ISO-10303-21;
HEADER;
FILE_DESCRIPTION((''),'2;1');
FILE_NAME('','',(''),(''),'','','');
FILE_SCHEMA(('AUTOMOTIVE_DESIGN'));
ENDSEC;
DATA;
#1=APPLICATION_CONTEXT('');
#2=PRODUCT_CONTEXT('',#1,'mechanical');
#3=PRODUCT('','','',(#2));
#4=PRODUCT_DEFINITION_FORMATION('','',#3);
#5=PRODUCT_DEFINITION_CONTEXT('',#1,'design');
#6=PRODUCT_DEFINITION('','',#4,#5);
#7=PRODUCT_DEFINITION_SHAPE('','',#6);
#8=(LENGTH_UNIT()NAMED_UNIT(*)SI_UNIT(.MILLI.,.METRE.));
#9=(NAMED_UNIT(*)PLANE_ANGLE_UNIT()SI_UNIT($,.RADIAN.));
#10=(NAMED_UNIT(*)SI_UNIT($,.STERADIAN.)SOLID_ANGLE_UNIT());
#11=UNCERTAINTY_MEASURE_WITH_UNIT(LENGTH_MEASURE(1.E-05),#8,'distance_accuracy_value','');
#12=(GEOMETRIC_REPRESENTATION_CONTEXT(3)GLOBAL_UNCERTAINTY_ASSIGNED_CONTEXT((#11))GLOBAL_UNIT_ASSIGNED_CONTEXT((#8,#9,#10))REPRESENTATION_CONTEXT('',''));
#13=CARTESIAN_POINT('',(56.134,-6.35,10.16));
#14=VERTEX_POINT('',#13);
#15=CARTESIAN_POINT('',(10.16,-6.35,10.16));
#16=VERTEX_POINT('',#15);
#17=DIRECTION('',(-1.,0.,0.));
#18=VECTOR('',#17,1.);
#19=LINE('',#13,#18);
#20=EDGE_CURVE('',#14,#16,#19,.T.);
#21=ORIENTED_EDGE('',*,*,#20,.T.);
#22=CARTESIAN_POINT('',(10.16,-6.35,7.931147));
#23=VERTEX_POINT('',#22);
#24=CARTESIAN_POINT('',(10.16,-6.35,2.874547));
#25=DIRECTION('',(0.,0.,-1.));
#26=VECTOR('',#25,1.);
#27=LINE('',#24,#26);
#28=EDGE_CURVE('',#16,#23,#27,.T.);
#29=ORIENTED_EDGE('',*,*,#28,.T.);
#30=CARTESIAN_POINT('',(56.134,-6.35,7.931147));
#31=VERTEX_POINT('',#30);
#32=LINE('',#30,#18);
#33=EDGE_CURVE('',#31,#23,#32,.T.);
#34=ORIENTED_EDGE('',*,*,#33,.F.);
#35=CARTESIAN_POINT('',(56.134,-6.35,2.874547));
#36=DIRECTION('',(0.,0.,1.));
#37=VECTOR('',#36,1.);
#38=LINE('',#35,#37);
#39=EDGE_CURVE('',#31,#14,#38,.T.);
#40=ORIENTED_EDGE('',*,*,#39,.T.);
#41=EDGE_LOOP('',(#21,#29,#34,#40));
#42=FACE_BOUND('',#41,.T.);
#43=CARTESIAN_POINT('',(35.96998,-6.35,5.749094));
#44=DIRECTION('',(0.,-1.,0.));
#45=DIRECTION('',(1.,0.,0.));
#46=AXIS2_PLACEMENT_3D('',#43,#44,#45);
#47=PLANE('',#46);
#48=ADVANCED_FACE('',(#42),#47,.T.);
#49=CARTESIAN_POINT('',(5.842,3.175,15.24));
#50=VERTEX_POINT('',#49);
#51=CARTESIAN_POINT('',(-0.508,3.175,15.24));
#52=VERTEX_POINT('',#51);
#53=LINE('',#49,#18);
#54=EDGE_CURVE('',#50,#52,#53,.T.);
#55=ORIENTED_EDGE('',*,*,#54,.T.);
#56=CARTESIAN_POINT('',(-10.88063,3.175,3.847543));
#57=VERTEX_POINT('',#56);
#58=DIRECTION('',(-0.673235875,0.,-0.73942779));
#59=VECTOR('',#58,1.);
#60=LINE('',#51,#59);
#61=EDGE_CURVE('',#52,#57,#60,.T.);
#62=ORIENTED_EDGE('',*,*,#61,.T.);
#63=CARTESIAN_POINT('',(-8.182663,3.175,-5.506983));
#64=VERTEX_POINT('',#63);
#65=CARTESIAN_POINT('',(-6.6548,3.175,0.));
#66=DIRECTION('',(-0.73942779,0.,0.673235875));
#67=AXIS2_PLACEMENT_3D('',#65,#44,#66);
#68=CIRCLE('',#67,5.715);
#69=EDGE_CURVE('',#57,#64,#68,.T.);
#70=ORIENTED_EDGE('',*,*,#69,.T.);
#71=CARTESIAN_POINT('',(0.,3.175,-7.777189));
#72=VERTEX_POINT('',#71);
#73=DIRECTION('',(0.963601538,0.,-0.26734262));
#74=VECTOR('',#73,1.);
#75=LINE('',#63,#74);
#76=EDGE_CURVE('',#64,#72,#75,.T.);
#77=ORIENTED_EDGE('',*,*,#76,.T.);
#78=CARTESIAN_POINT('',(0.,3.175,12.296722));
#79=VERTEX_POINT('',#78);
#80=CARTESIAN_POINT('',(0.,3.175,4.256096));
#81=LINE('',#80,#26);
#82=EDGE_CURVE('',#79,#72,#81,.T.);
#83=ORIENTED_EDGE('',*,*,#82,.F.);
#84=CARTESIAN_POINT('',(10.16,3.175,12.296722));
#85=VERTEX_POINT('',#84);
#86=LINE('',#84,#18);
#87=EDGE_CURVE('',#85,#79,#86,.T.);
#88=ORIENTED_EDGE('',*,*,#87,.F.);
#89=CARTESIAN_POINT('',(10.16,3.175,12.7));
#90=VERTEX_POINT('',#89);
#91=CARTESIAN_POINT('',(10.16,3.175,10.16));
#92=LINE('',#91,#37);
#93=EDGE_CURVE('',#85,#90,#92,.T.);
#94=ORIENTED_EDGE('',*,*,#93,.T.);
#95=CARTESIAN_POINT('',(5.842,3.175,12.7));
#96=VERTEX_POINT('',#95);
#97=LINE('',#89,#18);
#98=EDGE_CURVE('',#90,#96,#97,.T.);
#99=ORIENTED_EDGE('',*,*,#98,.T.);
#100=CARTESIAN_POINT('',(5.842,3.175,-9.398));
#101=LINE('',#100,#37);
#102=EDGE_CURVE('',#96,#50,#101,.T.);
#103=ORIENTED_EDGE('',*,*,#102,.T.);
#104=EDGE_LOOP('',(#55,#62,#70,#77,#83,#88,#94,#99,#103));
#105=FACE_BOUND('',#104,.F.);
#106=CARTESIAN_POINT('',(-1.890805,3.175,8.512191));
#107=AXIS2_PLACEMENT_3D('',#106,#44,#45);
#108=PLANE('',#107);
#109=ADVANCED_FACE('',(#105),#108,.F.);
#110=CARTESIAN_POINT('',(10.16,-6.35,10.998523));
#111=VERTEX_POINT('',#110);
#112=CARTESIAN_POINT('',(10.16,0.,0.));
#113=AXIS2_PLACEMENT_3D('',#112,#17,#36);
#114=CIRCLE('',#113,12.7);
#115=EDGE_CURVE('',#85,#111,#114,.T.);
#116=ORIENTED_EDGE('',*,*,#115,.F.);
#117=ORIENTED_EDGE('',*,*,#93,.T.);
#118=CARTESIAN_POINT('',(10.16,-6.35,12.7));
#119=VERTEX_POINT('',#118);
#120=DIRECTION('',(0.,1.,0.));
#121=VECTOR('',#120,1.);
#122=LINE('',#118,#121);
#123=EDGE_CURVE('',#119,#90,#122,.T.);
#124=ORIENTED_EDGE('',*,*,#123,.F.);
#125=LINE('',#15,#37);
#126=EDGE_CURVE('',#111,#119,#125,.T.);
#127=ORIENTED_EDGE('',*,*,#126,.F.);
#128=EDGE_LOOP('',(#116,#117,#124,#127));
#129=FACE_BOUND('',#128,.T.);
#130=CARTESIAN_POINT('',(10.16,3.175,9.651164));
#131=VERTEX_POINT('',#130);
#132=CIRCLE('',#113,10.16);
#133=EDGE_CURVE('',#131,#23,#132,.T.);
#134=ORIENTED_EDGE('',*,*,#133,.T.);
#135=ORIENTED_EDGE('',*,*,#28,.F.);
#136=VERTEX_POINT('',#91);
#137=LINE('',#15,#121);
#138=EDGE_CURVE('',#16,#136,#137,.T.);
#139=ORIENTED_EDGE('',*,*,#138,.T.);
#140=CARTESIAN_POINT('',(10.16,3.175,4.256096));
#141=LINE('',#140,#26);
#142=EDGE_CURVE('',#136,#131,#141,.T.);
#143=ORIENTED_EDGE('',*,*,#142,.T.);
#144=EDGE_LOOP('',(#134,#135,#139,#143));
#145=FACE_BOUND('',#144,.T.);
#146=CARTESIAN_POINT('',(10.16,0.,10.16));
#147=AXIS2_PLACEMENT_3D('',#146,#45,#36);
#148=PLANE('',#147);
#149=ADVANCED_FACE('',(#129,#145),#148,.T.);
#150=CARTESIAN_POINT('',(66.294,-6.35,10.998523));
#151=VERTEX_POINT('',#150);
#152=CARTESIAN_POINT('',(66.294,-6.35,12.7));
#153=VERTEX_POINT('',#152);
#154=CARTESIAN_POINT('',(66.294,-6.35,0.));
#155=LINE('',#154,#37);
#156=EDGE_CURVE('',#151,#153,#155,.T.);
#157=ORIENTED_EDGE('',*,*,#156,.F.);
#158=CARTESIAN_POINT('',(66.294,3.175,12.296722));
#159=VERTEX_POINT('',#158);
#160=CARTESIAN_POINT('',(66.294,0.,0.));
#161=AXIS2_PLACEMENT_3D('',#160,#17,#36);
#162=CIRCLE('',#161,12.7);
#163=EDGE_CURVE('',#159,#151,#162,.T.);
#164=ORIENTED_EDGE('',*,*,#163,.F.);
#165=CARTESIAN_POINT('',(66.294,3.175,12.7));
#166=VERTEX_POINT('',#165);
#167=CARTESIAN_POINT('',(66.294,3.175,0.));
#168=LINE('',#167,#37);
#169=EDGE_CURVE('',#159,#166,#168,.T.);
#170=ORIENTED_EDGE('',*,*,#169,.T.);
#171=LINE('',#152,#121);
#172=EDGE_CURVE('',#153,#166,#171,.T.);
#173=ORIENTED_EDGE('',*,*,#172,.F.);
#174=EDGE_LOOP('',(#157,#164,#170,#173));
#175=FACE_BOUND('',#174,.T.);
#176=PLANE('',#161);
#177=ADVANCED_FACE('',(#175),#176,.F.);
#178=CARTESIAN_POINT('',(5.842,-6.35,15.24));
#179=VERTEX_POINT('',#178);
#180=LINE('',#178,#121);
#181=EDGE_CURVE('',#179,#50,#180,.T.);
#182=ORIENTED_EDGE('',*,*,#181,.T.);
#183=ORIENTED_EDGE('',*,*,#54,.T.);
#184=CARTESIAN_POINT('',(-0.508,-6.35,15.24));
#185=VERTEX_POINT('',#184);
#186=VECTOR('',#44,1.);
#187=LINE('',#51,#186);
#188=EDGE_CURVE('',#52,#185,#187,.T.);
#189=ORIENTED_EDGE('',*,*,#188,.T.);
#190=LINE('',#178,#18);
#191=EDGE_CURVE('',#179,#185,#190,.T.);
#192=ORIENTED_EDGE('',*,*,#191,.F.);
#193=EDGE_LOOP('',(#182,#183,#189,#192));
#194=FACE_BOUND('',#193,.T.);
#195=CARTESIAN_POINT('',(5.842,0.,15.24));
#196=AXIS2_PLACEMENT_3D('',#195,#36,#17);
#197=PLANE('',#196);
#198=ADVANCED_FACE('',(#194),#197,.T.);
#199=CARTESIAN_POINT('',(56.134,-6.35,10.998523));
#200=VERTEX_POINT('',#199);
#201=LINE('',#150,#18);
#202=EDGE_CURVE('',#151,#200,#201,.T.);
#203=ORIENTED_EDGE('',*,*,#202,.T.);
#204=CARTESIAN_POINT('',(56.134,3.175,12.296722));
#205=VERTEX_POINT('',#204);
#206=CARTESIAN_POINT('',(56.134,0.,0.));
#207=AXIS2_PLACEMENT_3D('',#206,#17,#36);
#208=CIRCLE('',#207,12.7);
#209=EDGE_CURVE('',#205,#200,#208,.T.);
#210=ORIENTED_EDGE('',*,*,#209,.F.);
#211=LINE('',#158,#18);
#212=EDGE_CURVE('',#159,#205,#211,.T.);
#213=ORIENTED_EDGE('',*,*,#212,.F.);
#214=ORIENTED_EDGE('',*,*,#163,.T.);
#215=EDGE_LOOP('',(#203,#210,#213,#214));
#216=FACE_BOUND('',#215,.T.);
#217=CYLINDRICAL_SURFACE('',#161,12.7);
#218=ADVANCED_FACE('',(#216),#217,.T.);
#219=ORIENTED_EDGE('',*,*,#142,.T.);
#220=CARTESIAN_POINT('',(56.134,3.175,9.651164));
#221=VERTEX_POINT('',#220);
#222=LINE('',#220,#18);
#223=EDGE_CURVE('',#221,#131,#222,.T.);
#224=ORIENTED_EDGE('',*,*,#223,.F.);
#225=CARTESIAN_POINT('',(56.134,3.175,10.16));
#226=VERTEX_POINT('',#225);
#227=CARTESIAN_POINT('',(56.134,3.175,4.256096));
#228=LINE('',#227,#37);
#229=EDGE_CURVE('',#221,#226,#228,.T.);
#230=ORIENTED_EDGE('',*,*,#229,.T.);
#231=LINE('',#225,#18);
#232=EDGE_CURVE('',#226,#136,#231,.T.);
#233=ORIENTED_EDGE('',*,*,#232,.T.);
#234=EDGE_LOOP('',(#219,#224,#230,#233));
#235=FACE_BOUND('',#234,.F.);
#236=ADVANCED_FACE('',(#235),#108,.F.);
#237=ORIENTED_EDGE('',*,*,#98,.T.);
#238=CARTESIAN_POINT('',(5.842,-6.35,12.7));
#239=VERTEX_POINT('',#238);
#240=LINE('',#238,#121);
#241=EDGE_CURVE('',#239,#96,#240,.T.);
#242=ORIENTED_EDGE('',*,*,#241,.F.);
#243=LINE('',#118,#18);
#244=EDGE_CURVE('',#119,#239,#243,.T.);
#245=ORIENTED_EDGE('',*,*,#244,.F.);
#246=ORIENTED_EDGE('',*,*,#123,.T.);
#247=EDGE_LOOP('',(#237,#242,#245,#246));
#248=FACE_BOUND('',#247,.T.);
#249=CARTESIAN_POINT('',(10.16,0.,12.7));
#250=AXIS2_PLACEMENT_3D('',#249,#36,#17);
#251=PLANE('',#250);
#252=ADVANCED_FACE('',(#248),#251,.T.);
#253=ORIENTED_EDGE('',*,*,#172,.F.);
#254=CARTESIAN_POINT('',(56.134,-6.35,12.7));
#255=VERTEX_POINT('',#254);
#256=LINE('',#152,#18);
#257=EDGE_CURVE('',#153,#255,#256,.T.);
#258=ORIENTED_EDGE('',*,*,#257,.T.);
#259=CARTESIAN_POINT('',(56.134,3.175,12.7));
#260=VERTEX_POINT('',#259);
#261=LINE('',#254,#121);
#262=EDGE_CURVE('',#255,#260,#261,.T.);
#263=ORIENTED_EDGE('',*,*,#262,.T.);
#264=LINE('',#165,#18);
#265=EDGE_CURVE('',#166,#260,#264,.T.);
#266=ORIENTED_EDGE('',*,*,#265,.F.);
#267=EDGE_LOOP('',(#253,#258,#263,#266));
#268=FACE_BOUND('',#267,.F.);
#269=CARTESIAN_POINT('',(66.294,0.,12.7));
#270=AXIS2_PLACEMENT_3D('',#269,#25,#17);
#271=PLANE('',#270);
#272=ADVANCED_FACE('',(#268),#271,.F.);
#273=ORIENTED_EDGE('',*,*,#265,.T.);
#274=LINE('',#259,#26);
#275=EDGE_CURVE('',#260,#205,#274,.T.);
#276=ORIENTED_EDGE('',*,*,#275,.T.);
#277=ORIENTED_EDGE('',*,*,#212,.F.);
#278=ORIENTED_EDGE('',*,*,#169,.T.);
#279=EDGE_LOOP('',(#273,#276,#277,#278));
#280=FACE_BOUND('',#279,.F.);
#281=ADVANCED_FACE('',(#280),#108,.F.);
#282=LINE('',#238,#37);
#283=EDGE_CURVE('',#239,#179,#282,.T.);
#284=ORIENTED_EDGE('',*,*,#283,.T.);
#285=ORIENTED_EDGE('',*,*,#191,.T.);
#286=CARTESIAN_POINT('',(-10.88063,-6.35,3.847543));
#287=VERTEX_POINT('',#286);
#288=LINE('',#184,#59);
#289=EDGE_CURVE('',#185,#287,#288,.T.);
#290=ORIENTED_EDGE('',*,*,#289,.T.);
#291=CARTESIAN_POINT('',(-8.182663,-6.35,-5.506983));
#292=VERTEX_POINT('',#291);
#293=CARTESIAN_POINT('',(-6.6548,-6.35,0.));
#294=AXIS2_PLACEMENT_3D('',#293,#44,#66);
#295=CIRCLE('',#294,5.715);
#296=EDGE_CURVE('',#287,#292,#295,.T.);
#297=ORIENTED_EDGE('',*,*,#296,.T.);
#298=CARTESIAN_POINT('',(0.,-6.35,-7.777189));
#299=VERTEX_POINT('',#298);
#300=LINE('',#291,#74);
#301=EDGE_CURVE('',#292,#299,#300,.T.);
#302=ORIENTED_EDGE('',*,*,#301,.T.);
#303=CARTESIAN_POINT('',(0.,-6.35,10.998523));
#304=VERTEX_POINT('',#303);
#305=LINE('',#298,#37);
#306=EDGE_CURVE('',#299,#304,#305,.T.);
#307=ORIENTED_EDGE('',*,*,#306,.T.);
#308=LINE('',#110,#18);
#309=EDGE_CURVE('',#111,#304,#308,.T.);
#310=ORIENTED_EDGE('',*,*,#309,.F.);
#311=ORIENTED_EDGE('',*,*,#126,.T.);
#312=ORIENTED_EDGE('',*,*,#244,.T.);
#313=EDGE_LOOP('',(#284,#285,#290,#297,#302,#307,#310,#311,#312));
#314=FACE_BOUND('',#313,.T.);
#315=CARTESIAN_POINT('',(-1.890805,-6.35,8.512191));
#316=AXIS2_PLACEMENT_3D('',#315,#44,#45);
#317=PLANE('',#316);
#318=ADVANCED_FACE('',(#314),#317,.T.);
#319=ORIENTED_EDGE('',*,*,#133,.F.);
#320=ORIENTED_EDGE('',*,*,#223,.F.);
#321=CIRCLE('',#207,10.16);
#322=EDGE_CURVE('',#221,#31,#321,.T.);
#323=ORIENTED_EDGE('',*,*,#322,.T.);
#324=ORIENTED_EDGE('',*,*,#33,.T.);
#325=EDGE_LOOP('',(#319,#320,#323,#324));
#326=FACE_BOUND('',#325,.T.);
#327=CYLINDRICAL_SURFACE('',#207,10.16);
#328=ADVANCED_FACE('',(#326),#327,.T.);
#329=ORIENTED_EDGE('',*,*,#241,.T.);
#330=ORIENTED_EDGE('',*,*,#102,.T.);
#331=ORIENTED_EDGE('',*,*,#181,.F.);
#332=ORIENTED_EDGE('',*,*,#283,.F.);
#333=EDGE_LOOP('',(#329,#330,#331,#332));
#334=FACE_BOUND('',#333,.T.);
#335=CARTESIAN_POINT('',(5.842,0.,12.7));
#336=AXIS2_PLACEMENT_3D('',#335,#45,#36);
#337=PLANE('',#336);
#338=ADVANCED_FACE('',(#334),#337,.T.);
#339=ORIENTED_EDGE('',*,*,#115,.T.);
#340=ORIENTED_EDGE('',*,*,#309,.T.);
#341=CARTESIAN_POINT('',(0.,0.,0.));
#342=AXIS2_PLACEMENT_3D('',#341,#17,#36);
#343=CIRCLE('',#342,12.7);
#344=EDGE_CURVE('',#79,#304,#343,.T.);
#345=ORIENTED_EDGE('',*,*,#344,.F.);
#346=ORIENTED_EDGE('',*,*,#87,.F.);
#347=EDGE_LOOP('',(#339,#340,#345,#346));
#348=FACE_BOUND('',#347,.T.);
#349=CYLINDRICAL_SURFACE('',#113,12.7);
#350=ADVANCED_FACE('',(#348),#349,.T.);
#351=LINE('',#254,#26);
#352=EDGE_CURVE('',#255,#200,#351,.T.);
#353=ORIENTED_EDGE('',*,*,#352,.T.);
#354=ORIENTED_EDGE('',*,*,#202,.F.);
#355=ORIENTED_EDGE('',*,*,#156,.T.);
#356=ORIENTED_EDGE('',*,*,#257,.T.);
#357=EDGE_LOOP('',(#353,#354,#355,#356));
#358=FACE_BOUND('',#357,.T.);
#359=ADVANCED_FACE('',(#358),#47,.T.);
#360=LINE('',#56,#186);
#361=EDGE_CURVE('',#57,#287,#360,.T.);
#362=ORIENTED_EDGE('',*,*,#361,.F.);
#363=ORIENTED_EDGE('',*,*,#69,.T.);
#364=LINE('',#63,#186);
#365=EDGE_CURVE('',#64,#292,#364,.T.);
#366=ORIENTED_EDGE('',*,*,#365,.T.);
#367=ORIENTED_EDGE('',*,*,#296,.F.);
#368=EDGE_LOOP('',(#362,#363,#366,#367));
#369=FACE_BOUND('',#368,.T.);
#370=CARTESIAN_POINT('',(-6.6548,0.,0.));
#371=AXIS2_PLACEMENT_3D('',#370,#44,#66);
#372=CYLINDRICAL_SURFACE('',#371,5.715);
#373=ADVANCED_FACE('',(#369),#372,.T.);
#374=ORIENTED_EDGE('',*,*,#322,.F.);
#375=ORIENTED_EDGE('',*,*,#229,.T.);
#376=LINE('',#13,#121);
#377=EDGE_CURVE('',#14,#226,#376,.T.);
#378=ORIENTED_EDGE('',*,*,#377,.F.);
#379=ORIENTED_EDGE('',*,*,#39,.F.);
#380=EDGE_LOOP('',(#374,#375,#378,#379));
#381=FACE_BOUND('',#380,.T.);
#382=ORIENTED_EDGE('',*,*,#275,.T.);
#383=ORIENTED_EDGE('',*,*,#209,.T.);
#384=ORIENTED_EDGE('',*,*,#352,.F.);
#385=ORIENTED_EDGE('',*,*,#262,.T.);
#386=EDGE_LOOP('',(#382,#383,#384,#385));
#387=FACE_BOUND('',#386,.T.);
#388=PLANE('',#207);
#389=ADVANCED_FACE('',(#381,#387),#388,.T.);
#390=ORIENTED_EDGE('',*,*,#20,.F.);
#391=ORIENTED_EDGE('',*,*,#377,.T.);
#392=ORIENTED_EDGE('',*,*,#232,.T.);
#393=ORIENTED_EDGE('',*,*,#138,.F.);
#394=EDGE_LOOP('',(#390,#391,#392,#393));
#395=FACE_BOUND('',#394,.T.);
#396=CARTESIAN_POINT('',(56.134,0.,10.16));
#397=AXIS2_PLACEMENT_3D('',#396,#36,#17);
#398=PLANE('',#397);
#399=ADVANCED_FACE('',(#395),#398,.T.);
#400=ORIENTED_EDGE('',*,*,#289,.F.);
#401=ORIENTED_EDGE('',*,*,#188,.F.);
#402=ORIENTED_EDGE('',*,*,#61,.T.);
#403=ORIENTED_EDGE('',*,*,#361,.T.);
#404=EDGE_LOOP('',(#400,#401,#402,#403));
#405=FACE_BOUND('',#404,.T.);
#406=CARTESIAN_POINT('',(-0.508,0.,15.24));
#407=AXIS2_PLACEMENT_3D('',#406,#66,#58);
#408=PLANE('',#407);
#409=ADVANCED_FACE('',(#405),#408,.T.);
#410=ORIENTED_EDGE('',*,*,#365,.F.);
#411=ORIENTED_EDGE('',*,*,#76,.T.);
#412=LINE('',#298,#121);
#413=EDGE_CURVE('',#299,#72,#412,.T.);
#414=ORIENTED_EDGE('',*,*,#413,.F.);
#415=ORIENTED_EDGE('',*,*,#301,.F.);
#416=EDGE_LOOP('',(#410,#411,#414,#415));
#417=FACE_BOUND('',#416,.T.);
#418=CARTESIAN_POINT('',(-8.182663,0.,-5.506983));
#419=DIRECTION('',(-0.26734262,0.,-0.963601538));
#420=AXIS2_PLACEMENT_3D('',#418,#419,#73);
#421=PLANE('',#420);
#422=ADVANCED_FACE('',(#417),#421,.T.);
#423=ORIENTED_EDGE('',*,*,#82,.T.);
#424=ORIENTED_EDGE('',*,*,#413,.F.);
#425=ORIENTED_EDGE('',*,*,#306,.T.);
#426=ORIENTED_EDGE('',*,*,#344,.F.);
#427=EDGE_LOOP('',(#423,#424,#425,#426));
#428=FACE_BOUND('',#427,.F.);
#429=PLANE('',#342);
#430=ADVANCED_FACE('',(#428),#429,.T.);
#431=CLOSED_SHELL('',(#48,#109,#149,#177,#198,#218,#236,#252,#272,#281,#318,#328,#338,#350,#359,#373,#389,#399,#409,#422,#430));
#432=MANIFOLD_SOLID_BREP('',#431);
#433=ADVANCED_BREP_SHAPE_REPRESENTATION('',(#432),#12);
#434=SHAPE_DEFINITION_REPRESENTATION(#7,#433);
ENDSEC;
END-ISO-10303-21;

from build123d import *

# Parameters (mm, degrees)
F0_W     = 5.842
F0_H     = 12.7
F0_R     = 3.175
F2_DEPTH = 6.35
F3_DEPTH = 6.35
F4_DEPTH = 3.175
F5_DEPTH = 3.175


# Not quite as in the source:
# - the program builds the solid bodies; features that only make, move or delete a surface that nothing else refers to are left out


with BuildPart() as f1:
    # F0 (on Front) → F1 (revolve)
    with BuildSketch(Plane.XZ):
        Polygon((5.842, 12.7), (5.842, 0), (66.294, 0), (66.294, 12.7), (56.134, 12.7), (56.134, 10.16), (10.16, 10.16), (10.16, 12.7), align=None)
        with Locations((2.921, 6.35)):
            Rectangle(F0_W, F0_H)
    revolve(axis=Axis((33.147, 0, 0), (-1, 0, 0)))

    # F0 (on Front) → F2 (join)
    with BuildSketch(Plane.XZ):
        Polygon((5.842, 12.7), (5.842, 0), (66.294, 0), (66.294, 12.7), (56.134, 12.7), (56.134, 10.16), (10.16, 10.16), (10.16, 12.7), align=None)
        with BuildLine():
            ThreePointArc((-8.1826630726, -5.5069827884), (-3.1957909266, -4.5493385486), (-0.9398, 0))
            ThreePointArc((-0.9398, 0), (-4.5919612295, 5.3297205562), (-10.8806298187, 3.8475430269))
            ThreePointArc((-10.8806298187, 3.8475430269), (-12.1459778134, -1.5837270034), (-8.1826630726, -5.5069827884))
        make_face()
        with Locations((-6.6548, 0)):
            Circle(F0_R, mode=Mode.SUBTRACT)
        with Locations((2.921, 6.35)):
            Rectangle(F0_W, F0_H)
        with BuildLine():
            Line((5.842, 0), (0, 0))
            Line((0, 0), (-0.9398, 0))
            ThreePointArc((-0.9398, 0), (-3.1957909266, -4.5493385486), (-8.1826630726, -5.5069827884))
            Line((-8.1826630726, -5.5069827884), (5.842, -9.398))
            Line((5.842, -9.398), (5.842, 0))
        make_face()
        with Locations((-6.6548, 0)):
            Circle(F0_R)
    extrude(amount=F2_DEPTH)

    # F0 (on Front) → F3 (join)
    with BuildSketch(Plane.XZ):
        with BuildLine():
            Line((-0.9398, 0), (0, 0))
            Line((0, 0), (0, 12.7))
            Line((0, 12.7), (5.842, 12.7))
            Line((5.842, 12.7), (5.842, 15.24))
            Line((5.842, 15.24), (-0.508, 15.24))
            Line((-0.508, 15.24), (-10.8806298187, 3.8475430269))
            ThreePointArc((-10.8806298187, 3.8475430269), (-4.5919612295, 5.3297205562), (-0.9398, 0))
        make_face()
    extrude(amount=F3_DEPTH)

    # F0 (on Front) → F4 (join, symmetric)
    with BuildSketch(Plane.XZ):
        with BuildLine():
            Line((-0.9398, 0), (0, 0))
            Line((0, 0), (0, 12.7))
            Line((0, 12.7), (5.842, 12.7))
            Line((5.842, 12.7), (5.842, 15.24))
            Line((5.842, 15.24), (-0.508, 15.24))
            Line((-0.508, 15.24), (-10.8806298187, 3.8475430269))
            ThreePointArc((-10.8806298187, 3.8475430269), (-4.5919612295, 5.3297205562), (-0.9398, 0))
        make_face()
        with Locations((2.921, 6.35)):
            Rectangle(F0_W, F0_H)
        with BuildLine():
            Line((5.842, 0), (0, 0))
            Line((0, 0), (-0.9398, 0))
            ThreePointArc((-0.9398, 0), (-3.1957909266, -4.5493385486), (-8.1826630726, -5.5069827884))
            Line((-8.1826630726, -5.5069827884), (5.842, -9.398))
            Line((5.842, -9.398), (5.842, 0))
        make_face()
        Polygon((5.842, 12.7), (5.842, 0), (66.294, 0), (66.294, 12.7), (56.134, 12.7), (56.134, 10.16), (10.16, 10.16), (10.16, 12.7), align=None)
        with BuildLine():
            ThreePointArc((-8.1826630726, -5.5069827884), (-3.1957909266, -4.5493385486), (-0.9398, 0))
            ThreePointArc((-0.9398, 0), (-4.5919612295, 5.3297205562), (-10.8806298187, 3.8475430269))
            ThreePointArc((-10.8806298187, 3.8475430269), (-12.1459778134, -1.5837270034), (-8.1826630726, -5.5069827884))
        make_face()
        with Locations((-6.6548, 0)):
            Circle(F0_R, mode=Mode.SUBTRACT)
    extrude(amount=F4_DEPTH, both=True)

    # F0 (on Front) → F5 (join, symmetric)
    with BuildSketch(Plane.XZ):
        Polygon((5.842, 12.7), (5.842, 0), (66.294, 0), (66.294, 12.7), (56.134, 12.7), (56.134, 10.16), (10.16, 10.16), (10.16, 12.7), align=None)
        with BuildLine():
            ThreePointArc((-8.1826630726, -5.5069827884), (-3.1957909266, -4.5493385486), (-0.9398, 0))
            ThreePointArc((-0.9398, 0), (-4.5919612295, 5.3297205562), (-10.8806298187, 3.8475430269))
            ThreePointArc((-10.8806298187, 3.8475430269), (-12.1459778134, -1.5837270034), (-8.1826630726, -5.5069827884))
        make_face()
        with Locations((-6.6548, 0)):
            Circle(F0_R, mode=Mode.SUBTRACT)
        with BuildLine():
            Line((-0.9398, 0), (0, 0))
            Line((0, 0), (0, 12.7))
            Line((0, 12.7), (5.842, 12.7))
            Line((5.842, 12.7), (5.842, 15.24))
            Line((5.842, 15.24), (-0.508, 15.24))
            Line((-0.508, 15.24), (-10.8806298187, 3.8475430269))
            ThreePointArc((-10.8806298187, 3.8475430269), (-4.5919612295, 5.3297205562), (-0.9398, 0))
        make_face()
        with Locations((2.921, 6.35)):
            Rectangle(F0_W, F0_H)
        with BuildLine():
            Line((5.842, 0), (0, 0))
            Line((0, 0), (-0.9398, 0))
            ThreePointArc((-0.9398, 0), (-3.1957909266, -4.5493385486), (-8.1826630726, -5.5069827884))
            Line((-8.1826630726, -5.5069827884), (5.842, -9.398))
            Line((5.842, -9.398), (5.842, 0))
        make_face()
        with Locations((-6.6548, 0)):
            Circle(F0_R)
    extrude(amount=F5_DEPTH, both=True)


solid = f1.part
